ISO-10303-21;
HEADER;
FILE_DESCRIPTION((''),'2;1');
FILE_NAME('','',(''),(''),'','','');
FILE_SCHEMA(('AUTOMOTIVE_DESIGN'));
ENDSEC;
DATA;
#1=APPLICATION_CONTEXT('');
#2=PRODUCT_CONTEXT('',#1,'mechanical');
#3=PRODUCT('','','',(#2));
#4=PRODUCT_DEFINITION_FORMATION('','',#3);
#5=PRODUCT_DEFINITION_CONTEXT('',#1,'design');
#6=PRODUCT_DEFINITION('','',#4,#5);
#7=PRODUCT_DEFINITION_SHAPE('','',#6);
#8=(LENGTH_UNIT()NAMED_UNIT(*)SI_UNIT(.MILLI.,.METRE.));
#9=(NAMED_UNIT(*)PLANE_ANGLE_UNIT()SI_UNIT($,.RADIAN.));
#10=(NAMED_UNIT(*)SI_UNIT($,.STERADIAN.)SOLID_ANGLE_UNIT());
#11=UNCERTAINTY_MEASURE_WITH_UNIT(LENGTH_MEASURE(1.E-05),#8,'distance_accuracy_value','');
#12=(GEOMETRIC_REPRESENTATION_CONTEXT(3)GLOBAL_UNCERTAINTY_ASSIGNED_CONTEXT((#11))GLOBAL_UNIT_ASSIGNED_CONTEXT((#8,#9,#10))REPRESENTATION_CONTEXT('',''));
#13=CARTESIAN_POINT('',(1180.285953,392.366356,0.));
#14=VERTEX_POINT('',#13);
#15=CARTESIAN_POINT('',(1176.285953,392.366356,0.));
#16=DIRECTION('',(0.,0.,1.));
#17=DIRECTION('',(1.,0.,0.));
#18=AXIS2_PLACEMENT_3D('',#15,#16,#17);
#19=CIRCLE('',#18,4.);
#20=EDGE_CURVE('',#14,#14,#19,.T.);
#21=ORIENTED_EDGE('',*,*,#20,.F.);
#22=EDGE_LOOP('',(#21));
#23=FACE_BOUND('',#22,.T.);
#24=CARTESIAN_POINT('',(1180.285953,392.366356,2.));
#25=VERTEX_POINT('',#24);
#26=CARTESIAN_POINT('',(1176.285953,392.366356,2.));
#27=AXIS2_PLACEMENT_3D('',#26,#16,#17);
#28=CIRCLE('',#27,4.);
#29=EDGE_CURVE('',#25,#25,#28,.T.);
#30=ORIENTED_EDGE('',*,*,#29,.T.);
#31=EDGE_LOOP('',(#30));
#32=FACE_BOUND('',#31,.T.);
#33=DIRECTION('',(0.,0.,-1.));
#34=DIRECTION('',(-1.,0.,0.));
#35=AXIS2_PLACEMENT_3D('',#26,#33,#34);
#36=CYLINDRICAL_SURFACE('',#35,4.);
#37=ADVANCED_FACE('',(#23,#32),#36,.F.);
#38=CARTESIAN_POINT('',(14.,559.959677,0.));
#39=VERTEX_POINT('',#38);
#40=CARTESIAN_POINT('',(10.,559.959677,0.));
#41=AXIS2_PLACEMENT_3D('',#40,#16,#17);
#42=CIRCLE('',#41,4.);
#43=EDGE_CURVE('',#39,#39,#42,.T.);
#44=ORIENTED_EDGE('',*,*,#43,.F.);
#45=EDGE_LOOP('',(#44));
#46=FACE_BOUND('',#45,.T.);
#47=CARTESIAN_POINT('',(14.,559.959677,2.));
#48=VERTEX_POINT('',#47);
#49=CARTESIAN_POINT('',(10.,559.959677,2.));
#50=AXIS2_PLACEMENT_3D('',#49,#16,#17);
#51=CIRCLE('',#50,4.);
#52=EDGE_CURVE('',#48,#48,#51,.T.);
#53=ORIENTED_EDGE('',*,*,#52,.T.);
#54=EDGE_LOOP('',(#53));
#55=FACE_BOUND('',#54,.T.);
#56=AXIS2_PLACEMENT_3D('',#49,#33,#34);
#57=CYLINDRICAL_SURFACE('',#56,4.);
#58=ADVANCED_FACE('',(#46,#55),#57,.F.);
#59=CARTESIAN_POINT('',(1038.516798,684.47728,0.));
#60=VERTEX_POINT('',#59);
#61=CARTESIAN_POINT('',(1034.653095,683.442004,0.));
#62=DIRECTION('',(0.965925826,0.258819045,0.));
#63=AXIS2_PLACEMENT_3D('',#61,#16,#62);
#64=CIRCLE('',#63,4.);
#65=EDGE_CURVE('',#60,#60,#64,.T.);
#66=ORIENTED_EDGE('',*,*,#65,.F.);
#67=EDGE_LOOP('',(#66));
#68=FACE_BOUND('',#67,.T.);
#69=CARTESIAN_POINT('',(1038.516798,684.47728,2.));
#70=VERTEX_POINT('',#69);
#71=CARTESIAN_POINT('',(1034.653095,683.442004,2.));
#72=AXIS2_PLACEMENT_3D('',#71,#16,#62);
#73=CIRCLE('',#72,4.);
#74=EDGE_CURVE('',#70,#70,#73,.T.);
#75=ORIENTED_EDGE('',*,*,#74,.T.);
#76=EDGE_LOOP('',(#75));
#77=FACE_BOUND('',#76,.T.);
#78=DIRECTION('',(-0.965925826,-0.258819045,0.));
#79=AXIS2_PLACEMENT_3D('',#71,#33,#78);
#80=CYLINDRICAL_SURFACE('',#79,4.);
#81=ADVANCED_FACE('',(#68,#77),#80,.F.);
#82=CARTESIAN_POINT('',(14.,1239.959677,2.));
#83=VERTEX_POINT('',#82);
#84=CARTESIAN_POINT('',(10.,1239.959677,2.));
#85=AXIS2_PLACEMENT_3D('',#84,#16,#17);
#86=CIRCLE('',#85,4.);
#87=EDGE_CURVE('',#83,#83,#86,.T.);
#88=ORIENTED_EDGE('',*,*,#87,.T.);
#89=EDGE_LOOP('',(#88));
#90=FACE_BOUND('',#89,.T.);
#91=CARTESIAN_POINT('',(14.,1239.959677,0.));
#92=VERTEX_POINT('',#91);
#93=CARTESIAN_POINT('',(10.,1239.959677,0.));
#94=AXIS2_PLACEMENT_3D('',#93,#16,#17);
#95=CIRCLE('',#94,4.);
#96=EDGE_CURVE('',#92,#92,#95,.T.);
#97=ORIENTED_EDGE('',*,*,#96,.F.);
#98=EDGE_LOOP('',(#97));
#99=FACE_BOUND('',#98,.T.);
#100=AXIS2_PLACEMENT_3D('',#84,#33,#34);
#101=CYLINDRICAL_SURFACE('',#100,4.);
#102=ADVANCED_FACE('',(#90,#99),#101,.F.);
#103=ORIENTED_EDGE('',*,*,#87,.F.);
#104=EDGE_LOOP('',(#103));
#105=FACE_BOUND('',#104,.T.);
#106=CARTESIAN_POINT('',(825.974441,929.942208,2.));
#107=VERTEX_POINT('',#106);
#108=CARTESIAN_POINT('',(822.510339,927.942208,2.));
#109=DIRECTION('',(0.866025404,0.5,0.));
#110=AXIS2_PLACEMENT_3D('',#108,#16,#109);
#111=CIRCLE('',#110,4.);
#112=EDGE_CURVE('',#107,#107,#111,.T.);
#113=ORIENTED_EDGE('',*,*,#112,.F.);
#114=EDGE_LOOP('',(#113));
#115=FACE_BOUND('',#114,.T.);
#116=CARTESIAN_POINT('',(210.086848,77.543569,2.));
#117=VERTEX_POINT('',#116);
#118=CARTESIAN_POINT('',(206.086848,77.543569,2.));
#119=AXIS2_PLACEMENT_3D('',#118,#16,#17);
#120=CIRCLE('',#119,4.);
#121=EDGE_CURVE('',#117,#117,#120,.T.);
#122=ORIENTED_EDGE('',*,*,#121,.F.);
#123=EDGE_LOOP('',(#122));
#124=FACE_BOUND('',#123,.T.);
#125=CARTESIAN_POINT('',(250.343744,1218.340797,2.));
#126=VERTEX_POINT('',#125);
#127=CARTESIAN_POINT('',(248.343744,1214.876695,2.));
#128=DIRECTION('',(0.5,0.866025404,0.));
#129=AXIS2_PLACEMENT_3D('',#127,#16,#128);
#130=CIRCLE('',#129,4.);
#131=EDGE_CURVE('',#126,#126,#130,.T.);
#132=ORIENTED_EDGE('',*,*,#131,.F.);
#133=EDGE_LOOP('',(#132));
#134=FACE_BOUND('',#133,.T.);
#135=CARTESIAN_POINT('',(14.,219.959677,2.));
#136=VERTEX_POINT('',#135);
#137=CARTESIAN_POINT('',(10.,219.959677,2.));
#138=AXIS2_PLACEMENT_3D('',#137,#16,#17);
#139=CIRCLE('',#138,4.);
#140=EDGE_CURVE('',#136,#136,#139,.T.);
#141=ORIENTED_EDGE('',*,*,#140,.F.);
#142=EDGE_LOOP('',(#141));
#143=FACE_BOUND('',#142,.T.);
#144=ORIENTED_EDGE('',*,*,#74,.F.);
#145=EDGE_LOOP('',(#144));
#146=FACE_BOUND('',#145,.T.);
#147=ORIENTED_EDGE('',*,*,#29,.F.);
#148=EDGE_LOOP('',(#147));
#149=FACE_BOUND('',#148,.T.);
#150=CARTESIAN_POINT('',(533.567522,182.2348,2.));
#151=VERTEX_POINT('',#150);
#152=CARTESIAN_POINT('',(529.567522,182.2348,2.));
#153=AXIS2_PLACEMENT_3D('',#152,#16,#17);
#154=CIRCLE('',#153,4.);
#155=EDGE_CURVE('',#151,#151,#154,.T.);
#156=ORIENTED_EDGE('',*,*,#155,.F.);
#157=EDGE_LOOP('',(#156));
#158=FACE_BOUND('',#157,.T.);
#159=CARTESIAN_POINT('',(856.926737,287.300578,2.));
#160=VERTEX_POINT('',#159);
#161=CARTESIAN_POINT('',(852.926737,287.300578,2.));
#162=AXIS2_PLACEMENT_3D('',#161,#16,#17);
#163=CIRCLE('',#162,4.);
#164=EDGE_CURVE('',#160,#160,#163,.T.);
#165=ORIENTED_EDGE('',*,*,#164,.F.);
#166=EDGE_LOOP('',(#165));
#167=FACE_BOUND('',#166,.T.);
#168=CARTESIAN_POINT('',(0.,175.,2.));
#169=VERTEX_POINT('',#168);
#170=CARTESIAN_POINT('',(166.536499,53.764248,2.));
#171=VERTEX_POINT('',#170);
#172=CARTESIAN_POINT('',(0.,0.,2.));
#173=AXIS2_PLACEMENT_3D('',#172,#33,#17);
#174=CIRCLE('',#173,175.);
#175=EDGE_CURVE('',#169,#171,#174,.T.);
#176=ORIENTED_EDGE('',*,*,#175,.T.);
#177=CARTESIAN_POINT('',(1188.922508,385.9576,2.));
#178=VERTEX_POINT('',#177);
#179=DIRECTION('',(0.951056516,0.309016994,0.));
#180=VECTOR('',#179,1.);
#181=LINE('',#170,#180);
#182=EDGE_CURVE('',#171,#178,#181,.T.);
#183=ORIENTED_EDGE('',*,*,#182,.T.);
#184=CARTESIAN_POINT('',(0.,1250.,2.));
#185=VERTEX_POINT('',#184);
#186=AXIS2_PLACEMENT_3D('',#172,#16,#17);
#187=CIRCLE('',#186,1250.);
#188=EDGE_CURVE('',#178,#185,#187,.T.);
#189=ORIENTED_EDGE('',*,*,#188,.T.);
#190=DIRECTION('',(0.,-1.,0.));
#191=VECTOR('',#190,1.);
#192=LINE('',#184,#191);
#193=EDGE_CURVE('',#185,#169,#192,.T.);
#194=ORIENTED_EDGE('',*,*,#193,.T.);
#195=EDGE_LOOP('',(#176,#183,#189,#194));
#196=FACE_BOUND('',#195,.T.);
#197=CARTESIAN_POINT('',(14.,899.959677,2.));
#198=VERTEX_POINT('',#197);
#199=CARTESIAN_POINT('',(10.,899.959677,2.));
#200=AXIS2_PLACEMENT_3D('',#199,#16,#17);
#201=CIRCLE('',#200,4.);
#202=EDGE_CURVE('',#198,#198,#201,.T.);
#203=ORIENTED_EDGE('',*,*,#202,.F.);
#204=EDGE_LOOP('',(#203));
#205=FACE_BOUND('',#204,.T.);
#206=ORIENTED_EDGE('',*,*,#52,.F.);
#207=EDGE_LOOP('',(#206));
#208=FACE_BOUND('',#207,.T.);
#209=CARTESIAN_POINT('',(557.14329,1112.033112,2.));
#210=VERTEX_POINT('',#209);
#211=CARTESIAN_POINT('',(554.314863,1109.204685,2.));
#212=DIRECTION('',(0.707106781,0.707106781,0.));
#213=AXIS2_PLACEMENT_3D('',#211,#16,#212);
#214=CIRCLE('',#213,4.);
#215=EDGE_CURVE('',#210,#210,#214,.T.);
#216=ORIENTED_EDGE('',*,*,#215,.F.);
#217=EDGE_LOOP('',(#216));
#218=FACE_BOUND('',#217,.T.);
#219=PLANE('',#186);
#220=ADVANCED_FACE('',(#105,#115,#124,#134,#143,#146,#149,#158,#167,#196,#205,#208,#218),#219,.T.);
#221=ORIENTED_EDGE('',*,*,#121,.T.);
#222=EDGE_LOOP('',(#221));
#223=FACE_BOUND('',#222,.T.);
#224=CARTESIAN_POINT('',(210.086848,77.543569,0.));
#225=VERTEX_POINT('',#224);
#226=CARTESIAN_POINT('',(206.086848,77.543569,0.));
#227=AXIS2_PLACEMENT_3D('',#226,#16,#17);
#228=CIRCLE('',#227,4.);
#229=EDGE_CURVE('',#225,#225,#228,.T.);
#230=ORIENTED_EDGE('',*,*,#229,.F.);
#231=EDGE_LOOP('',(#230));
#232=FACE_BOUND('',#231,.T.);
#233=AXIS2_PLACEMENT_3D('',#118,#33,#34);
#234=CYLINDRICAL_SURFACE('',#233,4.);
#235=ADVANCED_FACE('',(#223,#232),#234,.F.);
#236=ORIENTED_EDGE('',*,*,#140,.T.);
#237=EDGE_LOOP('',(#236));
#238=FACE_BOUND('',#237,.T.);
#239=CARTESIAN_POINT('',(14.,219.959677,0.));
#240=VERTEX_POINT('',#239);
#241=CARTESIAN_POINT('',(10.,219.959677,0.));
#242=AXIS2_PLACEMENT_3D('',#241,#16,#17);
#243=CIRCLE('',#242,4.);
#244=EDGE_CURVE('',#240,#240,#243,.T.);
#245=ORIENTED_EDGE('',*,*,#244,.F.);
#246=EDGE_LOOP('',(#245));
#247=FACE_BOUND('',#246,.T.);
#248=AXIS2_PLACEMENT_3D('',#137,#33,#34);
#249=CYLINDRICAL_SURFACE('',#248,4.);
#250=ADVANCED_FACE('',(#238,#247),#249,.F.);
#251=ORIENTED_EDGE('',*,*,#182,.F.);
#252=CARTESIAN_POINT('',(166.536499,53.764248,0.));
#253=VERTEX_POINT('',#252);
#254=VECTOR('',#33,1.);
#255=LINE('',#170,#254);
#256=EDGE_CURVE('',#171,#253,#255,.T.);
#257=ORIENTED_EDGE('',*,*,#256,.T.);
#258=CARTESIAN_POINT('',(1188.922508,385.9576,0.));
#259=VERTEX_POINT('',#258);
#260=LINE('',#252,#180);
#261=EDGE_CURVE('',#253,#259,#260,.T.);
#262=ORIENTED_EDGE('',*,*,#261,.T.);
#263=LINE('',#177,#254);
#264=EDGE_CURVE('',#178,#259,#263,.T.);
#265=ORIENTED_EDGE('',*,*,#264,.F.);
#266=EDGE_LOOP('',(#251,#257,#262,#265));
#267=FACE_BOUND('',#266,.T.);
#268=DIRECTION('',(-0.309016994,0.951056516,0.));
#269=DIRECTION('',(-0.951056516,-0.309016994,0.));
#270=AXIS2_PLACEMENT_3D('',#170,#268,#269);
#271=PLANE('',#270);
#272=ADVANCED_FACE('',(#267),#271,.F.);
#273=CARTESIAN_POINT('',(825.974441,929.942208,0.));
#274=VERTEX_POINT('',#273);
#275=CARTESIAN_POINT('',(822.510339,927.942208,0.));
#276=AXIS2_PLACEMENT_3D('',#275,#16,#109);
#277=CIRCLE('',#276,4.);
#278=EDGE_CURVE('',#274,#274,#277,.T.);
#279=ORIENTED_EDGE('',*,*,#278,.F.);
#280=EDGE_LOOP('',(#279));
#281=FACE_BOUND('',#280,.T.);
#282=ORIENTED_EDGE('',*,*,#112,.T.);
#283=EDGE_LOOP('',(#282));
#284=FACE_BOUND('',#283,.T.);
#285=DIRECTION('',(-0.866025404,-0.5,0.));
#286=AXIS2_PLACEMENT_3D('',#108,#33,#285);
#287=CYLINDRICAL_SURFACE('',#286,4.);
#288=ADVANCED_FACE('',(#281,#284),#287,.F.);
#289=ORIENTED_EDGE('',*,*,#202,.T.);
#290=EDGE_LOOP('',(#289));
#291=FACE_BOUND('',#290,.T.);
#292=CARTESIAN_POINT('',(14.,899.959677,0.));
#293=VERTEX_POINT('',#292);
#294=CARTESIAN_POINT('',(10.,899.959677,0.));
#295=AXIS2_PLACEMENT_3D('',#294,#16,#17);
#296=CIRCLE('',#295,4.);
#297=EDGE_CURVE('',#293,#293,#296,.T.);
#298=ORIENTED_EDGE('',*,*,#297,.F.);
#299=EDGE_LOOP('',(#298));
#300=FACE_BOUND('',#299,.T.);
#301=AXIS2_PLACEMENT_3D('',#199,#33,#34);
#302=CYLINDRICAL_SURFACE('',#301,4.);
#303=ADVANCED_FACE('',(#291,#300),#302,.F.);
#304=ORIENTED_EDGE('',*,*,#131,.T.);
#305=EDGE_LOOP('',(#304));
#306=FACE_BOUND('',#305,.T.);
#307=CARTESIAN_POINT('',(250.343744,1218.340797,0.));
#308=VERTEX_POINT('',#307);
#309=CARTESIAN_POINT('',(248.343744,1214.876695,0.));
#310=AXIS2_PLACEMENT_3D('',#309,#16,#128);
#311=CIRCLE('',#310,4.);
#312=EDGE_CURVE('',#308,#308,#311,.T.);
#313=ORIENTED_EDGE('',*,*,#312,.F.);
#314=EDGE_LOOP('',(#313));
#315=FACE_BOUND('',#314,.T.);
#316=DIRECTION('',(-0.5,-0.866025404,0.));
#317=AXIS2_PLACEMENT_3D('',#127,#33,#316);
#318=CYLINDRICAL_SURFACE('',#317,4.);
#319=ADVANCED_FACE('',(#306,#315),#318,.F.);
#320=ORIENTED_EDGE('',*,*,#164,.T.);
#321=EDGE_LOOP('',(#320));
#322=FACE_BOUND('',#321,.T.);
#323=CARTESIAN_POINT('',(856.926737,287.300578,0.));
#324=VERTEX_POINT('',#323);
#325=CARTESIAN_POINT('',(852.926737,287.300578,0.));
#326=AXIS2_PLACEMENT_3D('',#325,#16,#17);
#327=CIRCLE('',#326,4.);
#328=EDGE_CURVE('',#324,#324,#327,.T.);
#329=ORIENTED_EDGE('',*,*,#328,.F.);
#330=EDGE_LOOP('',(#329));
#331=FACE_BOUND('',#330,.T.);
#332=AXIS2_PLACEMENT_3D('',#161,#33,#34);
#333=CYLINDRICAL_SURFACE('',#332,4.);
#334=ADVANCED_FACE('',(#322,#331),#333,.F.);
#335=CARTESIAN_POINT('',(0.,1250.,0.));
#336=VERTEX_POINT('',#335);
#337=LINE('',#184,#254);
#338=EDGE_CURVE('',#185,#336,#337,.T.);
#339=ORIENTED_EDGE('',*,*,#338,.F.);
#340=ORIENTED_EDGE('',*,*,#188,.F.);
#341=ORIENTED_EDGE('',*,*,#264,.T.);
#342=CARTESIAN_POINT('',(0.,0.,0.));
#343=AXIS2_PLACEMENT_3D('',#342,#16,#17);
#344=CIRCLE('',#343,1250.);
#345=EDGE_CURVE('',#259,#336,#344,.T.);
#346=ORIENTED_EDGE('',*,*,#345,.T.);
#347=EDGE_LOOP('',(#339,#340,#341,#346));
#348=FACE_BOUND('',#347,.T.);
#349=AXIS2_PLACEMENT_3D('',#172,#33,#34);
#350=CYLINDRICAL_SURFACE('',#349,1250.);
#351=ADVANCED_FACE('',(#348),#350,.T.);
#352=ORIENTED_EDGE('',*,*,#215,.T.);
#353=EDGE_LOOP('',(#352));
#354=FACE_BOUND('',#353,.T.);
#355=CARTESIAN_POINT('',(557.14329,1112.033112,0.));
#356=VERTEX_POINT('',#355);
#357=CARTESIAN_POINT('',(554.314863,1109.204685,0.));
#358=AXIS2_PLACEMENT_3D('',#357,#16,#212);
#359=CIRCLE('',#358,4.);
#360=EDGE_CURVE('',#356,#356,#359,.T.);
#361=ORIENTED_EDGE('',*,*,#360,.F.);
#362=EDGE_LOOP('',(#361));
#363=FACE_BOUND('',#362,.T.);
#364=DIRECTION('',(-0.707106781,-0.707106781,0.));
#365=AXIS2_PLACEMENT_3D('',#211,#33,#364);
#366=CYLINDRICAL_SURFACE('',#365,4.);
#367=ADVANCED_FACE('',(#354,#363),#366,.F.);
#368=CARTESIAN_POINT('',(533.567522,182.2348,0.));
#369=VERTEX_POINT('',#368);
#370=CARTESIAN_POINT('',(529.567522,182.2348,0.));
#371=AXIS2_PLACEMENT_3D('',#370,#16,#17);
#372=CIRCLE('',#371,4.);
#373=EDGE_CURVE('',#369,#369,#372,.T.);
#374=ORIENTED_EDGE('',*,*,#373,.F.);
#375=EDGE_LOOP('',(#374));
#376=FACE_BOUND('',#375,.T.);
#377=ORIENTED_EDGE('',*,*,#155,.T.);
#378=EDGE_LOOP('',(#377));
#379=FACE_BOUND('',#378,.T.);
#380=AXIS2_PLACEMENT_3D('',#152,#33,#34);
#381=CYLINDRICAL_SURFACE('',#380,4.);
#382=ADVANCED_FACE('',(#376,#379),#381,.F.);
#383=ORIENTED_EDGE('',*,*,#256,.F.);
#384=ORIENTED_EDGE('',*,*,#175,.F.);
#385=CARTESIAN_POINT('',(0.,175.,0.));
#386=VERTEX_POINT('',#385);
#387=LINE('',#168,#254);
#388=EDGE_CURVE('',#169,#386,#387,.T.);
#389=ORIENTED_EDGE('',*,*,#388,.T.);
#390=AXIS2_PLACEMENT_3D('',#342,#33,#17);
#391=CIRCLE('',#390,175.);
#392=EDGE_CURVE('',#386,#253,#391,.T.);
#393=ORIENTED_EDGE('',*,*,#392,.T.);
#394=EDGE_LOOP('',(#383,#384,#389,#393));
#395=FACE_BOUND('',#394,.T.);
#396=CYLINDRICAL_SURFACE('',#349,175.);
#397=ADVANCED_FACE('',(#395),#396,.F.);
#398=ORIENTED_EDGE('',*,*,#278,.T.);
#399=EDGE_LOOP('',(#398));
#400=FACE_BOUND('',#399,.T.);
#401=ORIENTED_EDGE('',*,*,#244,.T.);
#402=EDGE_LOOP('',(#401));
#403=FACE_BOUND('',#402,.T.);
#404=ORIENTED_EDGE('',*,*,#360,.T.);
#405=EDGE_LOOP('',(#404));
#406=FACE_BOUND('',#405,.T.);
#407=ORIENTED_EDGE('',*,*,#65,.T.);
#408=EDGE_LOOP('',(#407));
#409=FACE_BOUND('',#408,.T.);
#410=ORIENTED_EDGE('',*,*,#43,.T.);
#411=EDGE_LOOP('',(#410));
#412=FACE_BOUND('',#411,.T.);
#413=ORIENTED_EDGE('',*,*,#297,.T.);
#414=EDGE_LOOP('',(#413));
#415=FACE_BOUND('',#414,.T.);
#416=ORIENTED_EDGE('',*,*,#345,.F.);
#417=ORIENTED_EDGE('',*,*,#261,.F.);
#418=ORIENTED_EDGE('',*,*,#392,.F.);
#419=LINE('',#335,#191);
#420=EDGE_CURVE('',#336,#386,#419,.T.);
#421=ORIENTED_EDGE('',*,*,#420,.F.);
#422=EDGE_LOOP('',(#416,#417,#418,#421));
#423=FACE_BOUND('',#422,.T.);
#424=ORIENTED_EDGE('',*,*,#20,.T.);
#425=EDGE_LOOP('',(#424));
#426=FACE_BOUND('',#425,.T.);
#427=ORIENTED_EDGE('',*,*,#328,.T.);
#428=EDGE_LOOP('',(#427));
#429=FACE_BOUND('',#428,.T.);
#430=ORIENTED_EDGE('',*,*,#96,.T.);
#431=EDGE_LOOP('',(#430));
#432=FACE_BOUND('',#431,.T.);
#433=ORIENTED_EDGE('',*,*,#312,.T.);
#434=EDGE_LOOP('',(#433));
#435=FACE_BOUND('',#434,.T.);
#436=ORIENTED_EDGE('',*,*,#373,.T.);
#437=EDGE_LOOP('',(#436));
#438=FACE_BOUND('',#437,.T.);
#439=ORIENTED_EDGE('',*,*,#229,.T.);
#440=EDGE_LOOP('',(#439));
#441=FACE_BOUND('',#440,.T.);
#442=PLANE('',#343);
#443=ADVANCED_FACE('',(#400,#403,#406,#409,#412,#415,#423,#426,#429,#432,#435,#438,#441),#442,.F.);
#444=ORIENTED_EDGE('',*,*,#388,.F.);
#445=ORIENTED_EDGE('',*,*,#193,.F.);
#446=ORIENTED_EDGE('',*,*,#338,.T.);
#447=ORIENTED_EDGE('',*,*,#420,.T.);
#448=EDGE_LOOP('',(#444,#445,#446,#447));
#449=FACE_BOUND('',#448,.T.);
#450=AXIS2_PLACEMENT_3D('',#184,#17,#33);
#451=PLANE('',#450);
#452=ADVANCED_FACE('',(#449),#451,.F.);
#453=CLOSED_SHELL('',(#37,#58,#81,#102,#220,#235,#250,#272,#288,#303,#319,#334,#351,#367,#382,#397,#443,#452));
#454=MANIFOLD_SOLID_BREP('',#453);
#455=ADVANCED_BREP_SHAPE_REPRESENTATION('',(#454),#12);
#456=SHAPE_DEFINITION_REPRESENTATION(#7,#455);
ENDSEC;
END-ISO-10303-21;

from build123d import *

# Parameters (mm, degrees)
SKETCH1_R             = 4
BOSS_EXTRUDE1_DEPTH   = 2
CIRPATTERN1_OUTLINE_R = 4
CIRPATTERN1_DEPTH     = 2


# Read off the part's stored shape, not the designer's step: CirPattern1
with BuildPart() as part:
    # Sketch1 → Boss-Extrude1 (new body)
    with BuildSketch(Plane.XY):
        with BuildLine():
            Line((0, 1250), (0, 175))
            ThreePointArc((0, 175), (102.995768235, 141.480994221), (166.536499319, 53.764248293))
            Line((166.536499319, 53.764248293), (1188.922508468, 385.957599819))
            ThreePointArc((1188.922508468, 385.957599819), (734.864953657, 1011.17431726), (0, 1250))
        make_face()
        with Locations((206.086847975, 77.543569361)):
            Circle(SKETCH1_R, mode=Mode.SUBTRACT)
        with Locations((529.567521621, 182.234800025)):
            Circle(SKETCH1_R, mode=Mode.SUBTRACT)
        with Locations((852.926737161, 287.300578112)):
            Circle(SKETCH1_R, mode=Mode.SUBTRACT)
        with Locations((10, 219.959676764)):
            Circle(SKETCH1_R, mode=Mode.SUBTRACT)
        with Locations((10, 559.959676764)):
            Circle(SKETCH1_R, mode=Mode.SUBTRACT)
        with Locations((10, 899.959676764)):
            Circle(SKETCH1_R, mode=Mode.SUBTRACT)
        with Locations((10, 1239.959676764)):
            Circle(SKETCH1_R, mode=Mode.SUBTRACT)
        with Locations((1176.285952701, 392.3663562)):
            Circle(SKETCH1_R, mode=Mode.SUBTRACT)
    extrude(amount=BOSS_EXTRUDE1_DEPTH)

    # CirPattern1 outline → CirPattern1 (cut)
    with BuildSketch(Plane.XY):
        with Locations((248.343744291, 1214.876695254)):
            Circle(CIRPATTERN1_OUTLINE_R)
        with Locations((554.314862591, 1109.204684948)):
            Circle(CIRPATTERN1_OUTLINE_R)
        with Locations((822.510339054, 927.94220841)):
            Circle(CIRPATTERN1_OUTLINE_R)
        with Locations((1034.653095173, 683.442003866)):
            Circle(CIRPATTERN1_OUTLINE_R)
    extrude(amount=CIRPATTERN1_DEPTH, mode=Mode.SUBTRACT)


solid = part.part
